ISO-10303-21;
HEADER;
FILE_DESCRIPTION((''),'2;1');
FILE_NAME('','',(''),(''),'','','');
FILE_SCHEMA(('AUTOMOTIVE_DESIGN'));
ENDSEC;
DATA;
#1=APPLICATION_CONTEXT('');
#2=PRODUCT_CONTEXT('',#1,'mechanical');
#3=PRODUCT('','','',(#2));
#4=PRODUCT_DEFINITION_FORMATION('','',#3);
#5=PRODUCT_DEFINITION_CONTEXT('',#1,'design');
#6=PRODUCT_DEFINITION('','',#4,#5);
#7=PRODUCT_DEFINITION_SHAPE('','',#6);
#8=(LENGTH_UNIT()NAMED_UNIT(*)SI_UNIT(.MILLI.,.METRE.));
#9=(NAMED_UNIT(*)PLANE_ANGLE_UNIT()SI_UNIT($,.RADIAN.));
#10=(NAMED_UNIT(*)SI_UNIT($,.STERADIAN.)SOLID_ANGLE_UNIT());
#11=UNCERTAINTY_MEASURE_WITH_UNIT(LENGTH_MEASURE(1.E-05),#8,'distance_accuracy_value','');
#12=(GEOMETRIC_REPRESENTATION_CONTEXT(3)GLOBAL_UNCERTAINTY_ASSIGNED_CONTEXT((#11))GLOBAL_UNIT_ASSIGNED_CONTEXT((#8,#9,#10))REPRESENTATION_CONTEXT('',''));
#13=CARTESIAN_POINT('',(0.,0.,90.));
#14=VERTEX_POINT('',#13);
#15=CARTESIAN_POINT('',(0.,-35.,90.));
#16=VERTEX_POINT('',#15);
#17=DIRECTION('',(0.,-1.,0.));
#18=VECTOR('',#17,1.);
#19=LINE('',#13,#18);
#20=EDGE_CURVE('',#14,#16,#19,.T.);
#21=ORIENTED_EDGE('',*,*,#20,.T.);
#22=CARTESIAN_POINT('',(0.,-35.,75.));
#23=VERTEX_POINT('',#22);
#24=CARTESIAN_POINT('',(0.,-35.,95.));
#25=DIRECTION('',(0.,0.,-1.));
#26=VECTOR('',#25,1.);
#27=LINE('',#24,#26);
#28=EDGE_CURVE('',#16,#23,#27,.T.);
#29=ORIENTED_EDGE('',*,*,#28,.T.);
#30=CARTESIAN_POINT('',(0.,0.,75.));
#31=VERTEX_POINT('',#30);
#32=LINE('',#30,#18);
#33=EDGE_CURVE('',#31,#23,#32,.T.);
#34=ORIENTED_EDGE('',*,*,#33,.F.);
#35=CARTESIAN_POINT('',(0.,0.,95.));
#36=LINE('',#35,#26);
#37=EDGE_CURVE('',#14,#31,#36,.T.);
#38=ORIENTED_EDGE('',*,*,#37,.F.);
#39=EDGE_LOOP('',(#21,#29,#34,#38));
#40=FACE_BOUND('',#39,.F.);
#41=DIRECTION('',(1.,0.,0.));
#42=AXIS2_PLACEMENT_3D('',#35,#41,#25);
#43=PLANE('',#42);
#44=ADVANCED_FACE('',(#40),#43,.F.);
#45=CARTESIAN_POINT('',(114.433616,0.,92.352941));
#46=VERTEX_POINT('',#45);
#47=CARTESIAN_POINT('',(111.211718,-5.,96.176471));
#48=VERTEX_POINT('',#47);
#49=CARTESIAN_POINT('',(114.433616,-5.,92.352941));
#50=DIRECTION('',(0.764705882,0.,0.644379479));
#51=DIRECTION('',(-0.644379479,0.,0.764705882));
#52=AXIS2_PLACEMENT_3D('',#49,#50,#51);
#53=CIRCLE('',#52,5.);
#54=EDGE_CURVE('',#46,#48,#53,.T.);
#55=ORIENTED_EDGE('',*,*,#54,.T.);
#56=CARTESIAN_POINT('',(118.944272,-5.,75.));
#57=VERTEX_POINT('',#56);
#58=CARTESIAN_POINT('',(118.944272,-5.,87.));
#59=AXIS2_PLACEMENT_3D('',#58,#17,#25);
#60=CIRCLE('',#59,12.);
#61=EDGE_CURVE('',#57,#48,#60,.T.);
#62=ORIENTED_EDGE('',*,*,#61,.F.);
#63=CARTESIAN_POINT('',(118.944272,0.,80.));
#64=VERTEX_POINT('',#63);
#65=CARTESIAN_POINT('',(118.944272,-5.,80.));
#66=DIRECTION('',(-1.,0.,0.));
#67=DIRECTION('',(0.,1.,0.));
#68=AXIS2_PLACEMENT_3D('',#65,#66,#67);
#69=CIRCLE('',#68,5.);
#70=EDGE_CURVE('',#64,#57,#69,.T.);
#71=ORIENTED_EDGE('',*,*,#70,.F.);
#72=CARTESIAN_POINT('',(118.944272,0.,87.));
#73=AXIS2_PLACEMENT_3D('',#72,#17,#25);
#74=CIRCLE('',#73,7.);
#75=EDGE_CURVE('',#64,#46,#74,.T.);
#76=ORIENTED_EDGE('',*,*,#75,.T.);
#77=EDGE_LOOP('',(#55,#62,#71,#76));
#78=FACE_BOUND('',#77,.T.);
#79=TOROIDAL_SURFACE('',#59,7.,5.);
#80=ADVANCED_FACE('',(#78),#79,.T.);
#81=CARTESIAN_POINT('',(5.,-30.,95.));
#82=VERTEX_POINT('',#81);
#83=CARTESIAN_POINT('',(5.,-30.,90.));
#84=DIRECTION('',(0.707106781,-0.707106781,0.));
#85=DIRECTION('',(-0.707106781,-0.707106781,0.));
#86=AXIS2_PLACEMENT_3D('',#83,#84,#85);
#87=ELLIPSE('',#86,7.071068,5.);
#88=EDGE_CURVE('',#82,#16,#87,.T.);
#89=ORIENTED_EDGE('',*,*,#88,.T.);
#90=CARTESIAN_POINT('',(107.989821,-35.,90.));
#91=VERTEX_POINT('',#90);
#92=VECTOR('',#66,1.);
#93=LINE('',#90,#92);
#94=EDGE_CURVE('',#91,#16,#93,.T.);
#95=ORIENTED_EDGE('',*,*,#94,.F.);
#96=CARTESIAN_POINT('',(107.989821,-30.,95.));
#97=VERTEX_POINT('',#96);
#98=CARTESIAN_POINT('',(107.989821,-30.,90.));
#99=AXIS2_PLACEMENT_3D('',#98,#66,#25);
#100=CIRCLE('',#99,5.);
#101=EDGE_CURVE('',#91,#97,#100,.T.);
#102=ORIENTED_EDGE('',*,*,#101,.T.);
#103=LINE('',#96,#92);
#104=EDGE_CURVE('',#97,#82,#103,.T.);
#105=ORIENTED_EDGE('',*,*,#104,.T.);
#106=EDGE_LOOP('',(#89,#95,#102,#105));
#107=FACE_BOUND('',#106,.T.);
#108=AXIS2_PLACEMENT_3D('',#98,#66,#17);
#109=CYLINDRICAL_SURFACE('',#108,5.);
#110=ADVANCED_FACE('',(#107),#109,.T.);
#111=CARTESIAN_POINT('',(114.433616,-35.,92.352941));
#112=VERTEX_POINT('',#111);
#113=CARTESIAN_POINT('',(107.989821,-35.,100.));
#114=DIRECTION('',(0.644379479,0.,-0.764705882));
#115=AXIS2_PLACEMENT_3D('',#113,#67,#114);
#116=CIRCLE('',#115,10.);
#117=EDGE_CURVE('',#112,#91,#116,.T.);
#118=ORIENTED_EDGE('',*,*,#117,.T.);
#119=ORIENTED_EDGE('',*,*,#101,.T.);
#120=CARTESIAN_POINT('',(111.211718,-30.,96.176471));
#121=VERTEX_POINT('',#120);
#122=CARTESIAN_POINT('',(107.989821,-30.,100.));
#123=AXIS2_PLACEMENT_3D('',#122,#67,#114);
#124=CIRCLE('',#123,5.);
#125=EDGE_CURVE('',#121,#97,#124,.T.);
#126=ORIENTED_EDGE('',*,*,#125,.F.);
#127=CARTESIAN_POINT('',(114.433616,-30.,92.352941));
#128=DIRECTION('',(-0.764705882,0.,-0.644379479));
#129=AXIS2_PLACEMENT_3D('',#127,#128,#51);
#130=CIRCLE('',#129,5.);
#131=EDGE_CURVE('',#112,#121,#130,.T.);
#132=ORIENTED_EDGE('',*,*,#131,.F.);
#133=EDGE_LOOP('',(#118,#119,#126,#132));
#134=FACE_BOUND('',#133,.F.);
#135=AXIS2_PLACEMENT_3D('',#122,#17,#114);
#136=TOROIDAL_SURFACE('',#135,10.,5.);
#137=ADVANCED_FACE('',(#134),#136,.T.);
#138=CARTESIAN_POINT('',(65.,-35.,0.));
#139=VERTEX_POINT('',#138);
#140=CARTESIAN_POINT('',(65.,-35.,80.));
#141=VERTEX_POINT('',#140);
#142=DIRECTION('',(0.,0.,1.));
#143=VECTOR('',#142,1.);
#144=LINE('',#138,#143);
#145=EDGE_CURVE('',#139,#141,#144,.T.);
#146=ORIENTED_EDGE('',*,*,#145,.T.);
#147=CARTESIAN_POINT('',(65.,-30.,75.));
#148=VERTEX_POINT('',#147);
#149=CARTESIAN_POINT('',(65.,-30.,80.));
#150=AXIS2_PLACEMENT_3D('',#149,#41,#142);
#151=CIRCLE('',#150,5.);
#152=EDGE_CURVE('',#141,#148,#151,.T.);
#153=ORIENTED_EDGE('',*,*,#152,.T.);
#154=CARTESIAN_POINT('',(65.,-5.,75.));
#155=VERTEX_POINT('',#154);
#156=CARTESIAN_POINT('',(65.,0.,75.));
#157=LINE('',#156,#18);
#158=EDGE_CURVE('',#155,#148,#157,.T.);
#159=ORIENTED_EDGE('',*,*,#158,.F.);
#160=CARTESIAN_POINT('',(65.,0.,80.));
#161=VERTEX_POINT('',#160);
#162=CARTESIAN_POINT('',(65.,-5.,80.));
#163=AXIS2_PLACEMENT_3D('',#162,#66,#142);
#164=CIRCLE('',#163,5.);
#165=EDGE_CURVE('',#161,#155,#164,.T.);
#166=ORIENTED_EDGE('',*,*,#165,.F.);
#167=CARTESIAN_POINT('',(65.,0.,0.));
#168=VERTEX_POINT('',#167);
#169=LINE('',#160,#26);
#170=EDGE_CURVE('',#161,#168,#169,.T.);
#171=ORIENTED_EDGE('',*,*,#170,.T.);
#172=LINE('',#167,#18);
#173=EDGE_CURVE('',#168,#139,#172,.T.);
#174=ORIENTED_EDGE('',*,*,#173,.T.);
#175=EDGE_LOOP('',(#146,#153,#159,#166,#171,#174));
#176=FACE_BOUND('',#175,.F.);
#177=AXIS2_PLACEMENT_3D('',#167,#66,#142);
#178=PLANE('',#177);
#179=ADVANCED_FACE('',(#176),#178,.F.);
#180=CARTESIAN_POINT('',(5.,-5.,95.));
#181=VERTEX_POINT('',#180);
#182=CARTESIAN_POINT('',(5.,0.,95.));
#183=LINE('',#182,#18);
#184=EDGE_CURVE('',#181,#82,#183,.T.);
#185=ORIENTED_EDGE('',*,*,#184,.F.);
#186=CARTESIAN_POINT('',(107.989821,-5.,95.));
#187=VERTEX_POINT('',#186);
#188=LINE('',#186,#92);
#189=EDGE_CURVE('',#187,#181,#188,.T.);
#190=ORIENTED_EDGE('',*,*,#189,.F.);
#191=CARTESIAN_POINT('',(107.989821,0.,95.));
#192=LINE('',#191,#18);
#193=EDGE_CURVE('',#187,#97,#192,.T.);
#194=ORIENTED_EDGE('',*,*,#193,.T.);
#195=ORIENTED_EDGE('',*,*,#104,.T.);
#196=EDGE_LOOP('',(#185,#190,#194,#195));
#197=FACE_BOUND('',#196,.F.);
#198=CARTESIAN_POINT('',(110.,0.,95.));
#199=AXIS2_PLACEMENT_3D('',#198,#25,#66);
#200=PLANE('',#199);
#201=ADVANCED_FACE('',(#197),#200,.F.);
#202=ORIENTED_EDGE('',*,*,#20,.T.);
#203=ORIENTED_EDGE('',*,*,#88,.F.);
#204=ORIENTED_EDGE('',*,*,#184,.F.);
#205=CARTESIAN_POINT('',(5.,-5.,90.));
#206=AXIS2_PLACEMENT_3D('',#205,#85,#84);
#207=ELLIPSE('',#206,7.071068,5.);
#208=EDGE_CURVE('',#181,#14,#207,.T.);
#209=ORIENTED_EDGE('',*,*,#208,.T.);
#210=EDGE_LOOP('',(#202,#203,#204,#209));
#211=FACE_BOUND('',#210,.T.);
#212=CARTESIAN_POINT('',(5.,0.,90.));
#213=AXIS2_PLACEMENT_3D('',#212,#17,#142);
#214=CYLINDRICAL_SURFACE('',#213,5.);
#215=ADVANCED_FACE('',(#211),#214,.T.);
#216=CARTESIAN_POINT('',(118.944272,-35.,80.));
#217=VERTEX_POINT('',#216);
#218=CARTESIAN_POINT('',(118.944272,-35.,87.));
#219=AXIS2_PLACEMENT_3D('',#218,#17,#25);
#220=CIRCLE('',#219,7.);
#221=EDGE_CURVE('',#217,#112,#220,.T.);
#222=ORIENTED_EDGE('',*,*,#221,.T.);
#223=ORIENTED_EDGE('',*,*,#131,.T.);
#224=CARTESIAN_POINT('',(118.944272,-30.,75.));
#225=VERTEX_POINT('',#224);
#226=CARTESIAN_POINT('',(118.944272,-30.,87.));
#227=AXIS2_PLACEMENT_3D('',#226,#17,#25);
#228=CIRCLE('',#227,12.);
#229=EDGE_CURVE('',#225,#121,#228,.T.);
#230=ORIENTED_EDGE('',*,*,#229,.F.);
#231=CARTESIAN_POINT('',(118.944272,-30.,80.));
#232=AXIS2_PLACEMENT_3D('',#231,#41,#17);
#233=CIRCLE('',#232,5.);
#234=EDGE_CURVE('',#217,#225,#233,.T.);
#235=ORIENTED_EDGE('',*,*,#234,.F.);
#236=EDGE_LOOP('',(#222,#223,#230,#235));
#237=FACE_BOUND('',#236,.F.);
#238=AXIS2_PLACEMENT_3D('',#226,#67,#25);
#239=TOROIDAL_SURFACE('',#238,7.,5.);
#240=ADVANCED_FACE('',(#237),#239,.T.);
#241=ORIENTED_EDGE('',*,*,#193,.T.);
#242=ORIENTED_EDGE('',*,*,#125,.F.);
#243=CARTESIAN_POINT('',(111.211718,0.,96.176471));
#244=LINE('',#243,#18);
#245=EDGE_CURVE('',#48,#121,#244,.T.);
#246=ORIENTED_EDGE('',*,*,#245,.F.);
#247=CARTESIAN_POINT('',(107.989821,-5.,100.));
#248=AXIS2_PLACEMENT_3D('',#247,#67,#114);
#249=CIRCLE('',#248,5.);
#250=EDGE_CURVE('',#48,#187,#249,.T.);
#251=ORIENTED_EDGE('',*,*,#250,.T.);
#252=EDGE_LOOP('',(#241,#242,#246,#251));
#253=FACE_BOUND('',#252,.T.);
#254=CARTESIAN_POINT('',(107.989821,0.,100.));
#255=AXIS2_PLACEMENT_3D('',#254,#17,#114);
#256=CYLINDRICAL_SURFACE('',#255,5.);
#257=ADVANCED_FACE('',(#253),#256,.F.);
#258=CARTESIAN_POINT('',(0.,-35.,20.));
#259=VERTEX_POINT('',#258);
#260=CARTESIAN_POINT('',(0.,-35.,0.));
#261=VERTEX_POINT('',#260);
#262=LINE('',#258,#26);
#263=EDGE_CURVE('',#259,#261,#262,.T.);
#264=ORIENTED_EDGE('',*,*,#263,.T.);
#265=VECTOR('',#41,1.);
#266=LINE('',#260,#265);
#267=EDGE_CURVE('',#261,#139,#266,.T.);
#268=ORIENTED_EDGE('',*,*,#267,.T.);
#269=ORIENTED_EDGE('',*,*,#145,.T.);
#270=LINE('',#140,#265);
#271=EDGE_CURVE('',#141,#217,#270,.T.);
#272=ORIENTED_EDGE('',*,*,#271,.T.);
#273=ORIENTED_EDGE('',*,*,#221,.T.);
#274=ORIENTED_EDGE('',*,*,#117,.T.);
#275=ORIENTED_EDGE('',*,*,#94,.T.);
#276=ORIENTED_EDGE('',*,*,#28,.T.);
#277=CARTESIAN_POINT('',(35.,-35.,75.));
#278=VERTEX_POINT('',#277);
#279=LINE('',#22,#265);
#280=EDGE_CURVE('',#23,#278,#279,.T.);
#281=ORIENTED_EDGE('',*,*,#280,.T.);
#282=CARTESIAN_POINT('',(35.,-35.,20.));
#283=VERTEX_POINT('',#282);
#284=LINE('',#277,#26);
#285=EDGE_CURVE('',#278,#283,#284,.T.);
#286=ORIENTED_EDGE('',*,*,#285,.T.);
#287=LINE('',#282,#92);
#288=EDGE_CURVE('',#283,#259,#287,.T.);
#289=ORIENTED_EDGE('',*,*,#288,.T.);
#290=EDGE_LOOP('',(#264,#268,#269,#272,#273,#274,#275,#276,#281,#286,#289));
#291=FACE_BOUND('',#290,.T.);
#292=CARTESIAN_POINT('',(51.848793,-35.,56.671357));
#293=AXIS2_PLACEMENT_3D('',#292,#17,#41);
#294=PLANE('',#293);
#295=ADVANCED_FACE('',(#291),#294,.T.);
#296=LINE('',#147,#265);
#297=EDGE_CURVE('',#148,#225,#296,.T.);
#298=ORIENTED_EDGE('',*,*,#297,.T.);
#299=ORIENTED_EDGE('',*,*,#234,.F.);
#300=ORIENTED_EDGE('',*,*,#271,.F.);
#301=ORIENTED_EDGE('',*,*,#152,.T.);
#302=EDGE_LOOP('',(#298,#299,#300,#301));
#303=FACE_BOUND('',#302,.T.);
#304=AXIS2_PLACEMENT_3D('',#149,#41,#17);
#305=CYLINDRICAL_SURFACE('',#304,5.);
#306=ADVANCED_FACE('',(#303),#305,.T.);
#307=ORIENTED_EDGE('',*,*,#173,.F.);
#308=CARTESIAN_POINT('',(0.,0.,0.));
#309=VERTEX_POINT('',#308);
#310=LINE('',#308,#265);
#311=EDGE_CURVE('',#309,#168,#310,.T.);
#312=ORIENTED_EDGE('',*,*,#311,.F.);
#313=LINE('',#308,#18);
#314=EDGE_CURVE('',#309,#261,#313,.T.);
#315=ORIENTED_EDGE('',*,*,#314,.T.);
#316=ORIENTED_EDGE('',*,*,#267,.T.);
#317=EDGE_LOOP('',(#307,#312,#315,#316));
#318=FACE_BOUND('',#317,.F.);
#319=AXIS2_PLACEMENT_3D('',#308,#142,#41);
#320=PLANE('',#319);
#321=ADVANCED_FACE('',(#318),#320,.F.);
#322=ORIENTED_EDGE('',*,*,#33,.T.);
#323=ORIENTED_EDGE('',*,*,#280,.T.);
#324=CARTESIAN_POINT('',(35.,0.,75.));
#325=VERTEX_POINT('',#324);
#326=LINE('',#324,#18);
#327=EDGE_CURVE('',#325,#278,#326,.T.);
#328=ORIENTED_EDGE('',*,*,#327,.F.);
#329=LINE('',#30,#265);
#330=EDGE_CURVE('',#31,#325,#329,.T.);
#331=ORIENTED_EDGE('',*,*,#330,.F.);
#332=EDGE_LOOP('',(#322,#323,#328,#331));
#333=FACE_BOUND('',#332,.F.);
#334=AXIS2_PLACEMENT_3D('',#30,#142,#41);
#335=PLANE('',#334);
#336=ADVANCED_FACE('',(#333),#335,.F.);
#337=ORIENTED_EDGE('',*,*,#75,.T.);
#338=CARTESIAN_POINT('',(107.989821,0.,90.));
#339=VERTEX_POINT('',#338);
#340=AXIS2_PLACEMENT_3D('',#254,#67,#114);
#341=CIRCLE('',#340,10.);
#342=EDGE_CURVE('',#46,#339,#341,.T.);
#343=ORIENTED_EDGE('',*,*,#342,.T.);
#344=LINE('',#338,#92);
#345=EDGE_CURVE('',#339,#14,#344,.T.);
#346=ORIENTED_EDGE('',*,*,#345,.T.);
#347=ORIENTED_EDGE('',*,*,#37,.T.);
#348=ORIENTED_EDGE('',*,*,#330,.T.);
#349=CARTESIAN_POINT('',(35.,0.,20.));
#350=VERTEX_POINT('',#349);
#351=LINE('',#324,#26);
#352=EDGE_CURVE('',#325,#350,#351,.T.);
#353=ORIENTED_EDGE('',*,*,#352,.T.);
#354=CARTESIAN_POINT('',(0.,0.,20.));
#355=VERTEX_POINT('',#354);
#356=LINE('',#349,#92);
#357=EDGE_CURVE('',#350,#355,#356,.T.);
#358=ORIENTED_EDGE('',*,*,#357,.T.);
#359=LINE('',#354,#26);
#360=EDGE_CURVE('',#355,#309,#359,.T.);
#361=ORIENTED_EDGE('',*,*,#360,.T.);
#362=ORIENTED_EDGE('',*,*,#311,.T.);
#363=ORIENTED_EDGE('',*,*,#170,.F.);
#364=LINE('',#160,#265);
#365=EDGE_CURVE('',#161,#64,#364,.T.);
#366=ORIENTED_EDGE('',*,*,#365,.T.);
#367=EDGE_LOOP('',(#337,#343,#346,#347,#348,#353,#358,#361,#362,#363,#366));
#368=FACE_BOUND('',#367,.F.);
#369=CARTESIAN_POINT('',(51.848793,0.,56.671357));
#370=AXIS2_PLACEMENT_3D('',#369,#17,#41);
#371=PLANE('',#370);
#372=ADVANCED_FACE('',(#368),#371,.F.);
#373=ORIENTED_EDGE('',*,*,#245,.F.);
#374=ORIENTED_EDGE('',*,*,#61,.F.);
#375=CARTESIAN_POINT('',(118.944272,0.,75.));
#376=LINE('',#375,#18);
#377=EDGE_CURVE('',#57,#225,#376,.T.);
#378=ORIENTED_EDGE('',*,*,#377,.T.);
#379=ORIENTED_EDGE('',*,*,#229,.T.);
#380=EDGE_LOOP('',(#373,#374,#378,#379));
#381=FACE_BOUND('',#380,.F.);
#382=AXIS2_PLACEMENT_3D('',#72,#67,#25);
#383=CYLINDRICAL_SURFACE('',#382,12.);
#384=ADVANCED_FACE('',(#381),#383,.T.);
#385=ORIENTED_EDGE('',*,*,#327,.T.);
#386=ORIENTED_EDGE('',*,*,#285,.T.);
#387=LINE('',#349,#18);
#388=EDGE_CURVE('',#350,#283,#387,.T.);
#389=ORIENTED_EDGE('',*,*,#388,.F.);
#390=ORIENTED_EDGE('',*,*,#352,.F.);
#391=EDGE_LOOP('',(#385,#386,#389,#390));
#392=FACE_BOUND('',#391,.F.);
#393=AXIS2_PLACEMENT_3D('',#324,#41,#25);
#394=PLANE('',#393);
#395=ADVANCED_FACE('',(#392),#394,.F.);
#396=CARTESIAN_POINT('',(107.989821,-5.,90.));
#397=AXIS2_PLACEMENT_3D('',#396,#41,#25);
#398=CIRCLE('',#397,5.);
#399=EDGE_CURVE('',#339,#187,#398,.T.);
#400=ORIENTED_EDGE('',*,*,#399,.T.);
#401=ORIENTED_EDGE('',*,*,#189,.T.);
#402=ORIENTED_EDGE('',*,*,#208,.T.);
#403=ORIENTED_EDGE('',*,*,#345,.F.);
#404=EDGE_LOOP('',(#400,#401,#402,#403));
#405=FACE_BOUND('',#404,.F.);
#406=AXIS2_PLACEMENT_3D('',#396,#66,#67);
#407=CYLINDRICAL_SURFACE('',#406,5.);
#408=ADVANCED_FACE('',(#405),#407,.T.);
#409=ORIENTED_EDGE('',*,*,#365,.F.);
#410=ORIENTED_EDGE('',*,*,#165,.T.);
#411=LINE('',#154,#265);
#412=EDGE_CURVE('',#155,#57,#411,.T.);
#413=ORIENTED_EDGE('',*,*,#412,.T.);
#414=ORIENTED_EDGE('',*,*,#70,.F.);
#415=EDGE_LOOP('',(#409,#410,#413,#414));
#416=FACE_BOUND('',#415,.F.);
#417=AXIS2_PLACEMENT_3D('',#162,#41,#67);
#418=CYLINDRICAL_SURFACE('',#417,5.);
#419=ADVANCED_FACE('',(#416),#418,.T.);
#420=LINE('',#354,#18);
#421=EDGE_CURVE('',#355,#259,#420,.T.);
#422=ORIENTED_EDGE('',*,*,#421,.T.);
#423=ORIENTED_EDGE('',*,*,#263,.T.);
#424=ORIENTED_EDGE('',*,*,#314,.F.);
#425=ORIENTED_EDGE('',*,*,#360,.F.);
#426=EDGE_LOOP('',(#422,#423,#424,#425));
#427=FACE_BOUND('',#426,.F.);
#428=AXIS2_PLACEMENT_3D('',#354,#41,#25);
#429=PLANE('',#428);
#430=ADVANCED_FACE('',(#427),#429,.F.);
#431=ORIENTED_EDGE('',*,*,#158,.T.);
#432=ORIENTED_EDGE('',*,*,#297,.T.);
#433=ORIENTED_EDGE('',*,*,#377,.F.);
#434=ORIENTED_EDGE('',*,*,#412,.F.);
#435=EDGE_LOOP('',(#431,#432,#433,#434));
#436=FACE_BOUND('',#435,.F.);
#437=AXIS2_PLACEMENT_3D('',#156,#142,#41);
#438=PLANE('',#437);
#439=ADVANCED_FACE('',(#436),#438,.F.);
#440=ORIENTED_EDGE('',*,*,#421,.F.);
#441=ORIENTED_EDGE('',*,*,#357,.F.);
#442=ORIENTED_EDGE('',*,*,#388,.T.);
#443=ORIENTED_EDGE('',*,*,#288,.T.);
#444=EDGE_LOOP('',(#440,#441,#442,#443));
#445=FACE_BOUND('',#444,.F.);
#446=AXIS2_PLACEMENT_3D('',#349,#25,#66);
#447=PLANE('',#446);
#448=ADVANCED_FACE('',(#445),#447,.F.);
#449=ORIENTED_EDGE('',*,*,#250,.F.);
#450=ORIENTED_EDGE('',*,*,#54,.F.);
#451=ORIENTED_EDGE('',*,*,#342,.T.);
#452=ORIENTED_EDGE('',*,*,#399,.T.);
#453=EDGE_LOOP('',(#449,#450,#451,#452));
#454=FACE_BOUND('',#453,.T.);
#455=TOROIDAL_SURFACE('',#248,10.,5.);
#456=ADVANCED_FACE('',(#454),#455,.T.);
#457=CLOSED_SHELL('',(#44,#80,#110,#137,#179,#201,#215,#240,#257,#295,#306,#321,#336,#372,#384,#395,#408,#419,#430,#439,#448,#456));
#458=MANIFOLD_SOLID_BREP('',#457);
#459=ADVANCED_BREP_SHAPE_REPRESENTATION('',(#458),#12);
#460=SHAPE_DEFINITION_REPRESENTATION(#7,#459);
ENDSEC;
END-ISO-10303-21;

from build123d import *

# Parameters (mm, degrees)
F1_DEPTH = 35
F2_F1_R  = 5
F2_F2_R  = 5


with BuildPart() as f1:
    # F0 (on Front) → F1 (new body)
    with BuildSketch(Plane.XZ):
        with BuildLine():
            Line((0, 20), (0, 0))
            Line((0, 0), (65, 0))
            Line((65, 0), (65, 75))
            Line((65, 75), (118.94427191, 75))
            ThreePointArc((118.94427191, 75), (129.8987230601, 91.8989794856), (110, 95))
            Line((110, 95), (0, 95))
            Line((0, 95), (0, 75))
            Line((0, 75), (35, 75))
            Line((35, 75), (35, 20))
            Line((35, 20), (0, 20))
        make_face()
    extrude(amount=F1_DEPTH)

    # F2: fillet of radius 5 on 4 edges, made by hand

    # F2_f1
    f2_f1_edges = [f1.edges().sort_by_distance(p)[0] for p in [
        (110, -17.5, 95),
    ]]
    fillet(f2_f1_edges, radius=F2_F1_R)

    # F2_f2
    f2_f2_edges = [f1.edges().sort_by_distance(p)[0] for p in [
        (0, -17.5, 95),
        (53.9949103799, 0, 95),
        (53.9949103799, -35, 95),
        (109.7048066113, -35, 95.3033178169),
        (109.7048066113, 0, 95.3033178169),
    ]]
    fillet(f2_f2_edges, radius=F2_F2_R)


solid = f1.part
